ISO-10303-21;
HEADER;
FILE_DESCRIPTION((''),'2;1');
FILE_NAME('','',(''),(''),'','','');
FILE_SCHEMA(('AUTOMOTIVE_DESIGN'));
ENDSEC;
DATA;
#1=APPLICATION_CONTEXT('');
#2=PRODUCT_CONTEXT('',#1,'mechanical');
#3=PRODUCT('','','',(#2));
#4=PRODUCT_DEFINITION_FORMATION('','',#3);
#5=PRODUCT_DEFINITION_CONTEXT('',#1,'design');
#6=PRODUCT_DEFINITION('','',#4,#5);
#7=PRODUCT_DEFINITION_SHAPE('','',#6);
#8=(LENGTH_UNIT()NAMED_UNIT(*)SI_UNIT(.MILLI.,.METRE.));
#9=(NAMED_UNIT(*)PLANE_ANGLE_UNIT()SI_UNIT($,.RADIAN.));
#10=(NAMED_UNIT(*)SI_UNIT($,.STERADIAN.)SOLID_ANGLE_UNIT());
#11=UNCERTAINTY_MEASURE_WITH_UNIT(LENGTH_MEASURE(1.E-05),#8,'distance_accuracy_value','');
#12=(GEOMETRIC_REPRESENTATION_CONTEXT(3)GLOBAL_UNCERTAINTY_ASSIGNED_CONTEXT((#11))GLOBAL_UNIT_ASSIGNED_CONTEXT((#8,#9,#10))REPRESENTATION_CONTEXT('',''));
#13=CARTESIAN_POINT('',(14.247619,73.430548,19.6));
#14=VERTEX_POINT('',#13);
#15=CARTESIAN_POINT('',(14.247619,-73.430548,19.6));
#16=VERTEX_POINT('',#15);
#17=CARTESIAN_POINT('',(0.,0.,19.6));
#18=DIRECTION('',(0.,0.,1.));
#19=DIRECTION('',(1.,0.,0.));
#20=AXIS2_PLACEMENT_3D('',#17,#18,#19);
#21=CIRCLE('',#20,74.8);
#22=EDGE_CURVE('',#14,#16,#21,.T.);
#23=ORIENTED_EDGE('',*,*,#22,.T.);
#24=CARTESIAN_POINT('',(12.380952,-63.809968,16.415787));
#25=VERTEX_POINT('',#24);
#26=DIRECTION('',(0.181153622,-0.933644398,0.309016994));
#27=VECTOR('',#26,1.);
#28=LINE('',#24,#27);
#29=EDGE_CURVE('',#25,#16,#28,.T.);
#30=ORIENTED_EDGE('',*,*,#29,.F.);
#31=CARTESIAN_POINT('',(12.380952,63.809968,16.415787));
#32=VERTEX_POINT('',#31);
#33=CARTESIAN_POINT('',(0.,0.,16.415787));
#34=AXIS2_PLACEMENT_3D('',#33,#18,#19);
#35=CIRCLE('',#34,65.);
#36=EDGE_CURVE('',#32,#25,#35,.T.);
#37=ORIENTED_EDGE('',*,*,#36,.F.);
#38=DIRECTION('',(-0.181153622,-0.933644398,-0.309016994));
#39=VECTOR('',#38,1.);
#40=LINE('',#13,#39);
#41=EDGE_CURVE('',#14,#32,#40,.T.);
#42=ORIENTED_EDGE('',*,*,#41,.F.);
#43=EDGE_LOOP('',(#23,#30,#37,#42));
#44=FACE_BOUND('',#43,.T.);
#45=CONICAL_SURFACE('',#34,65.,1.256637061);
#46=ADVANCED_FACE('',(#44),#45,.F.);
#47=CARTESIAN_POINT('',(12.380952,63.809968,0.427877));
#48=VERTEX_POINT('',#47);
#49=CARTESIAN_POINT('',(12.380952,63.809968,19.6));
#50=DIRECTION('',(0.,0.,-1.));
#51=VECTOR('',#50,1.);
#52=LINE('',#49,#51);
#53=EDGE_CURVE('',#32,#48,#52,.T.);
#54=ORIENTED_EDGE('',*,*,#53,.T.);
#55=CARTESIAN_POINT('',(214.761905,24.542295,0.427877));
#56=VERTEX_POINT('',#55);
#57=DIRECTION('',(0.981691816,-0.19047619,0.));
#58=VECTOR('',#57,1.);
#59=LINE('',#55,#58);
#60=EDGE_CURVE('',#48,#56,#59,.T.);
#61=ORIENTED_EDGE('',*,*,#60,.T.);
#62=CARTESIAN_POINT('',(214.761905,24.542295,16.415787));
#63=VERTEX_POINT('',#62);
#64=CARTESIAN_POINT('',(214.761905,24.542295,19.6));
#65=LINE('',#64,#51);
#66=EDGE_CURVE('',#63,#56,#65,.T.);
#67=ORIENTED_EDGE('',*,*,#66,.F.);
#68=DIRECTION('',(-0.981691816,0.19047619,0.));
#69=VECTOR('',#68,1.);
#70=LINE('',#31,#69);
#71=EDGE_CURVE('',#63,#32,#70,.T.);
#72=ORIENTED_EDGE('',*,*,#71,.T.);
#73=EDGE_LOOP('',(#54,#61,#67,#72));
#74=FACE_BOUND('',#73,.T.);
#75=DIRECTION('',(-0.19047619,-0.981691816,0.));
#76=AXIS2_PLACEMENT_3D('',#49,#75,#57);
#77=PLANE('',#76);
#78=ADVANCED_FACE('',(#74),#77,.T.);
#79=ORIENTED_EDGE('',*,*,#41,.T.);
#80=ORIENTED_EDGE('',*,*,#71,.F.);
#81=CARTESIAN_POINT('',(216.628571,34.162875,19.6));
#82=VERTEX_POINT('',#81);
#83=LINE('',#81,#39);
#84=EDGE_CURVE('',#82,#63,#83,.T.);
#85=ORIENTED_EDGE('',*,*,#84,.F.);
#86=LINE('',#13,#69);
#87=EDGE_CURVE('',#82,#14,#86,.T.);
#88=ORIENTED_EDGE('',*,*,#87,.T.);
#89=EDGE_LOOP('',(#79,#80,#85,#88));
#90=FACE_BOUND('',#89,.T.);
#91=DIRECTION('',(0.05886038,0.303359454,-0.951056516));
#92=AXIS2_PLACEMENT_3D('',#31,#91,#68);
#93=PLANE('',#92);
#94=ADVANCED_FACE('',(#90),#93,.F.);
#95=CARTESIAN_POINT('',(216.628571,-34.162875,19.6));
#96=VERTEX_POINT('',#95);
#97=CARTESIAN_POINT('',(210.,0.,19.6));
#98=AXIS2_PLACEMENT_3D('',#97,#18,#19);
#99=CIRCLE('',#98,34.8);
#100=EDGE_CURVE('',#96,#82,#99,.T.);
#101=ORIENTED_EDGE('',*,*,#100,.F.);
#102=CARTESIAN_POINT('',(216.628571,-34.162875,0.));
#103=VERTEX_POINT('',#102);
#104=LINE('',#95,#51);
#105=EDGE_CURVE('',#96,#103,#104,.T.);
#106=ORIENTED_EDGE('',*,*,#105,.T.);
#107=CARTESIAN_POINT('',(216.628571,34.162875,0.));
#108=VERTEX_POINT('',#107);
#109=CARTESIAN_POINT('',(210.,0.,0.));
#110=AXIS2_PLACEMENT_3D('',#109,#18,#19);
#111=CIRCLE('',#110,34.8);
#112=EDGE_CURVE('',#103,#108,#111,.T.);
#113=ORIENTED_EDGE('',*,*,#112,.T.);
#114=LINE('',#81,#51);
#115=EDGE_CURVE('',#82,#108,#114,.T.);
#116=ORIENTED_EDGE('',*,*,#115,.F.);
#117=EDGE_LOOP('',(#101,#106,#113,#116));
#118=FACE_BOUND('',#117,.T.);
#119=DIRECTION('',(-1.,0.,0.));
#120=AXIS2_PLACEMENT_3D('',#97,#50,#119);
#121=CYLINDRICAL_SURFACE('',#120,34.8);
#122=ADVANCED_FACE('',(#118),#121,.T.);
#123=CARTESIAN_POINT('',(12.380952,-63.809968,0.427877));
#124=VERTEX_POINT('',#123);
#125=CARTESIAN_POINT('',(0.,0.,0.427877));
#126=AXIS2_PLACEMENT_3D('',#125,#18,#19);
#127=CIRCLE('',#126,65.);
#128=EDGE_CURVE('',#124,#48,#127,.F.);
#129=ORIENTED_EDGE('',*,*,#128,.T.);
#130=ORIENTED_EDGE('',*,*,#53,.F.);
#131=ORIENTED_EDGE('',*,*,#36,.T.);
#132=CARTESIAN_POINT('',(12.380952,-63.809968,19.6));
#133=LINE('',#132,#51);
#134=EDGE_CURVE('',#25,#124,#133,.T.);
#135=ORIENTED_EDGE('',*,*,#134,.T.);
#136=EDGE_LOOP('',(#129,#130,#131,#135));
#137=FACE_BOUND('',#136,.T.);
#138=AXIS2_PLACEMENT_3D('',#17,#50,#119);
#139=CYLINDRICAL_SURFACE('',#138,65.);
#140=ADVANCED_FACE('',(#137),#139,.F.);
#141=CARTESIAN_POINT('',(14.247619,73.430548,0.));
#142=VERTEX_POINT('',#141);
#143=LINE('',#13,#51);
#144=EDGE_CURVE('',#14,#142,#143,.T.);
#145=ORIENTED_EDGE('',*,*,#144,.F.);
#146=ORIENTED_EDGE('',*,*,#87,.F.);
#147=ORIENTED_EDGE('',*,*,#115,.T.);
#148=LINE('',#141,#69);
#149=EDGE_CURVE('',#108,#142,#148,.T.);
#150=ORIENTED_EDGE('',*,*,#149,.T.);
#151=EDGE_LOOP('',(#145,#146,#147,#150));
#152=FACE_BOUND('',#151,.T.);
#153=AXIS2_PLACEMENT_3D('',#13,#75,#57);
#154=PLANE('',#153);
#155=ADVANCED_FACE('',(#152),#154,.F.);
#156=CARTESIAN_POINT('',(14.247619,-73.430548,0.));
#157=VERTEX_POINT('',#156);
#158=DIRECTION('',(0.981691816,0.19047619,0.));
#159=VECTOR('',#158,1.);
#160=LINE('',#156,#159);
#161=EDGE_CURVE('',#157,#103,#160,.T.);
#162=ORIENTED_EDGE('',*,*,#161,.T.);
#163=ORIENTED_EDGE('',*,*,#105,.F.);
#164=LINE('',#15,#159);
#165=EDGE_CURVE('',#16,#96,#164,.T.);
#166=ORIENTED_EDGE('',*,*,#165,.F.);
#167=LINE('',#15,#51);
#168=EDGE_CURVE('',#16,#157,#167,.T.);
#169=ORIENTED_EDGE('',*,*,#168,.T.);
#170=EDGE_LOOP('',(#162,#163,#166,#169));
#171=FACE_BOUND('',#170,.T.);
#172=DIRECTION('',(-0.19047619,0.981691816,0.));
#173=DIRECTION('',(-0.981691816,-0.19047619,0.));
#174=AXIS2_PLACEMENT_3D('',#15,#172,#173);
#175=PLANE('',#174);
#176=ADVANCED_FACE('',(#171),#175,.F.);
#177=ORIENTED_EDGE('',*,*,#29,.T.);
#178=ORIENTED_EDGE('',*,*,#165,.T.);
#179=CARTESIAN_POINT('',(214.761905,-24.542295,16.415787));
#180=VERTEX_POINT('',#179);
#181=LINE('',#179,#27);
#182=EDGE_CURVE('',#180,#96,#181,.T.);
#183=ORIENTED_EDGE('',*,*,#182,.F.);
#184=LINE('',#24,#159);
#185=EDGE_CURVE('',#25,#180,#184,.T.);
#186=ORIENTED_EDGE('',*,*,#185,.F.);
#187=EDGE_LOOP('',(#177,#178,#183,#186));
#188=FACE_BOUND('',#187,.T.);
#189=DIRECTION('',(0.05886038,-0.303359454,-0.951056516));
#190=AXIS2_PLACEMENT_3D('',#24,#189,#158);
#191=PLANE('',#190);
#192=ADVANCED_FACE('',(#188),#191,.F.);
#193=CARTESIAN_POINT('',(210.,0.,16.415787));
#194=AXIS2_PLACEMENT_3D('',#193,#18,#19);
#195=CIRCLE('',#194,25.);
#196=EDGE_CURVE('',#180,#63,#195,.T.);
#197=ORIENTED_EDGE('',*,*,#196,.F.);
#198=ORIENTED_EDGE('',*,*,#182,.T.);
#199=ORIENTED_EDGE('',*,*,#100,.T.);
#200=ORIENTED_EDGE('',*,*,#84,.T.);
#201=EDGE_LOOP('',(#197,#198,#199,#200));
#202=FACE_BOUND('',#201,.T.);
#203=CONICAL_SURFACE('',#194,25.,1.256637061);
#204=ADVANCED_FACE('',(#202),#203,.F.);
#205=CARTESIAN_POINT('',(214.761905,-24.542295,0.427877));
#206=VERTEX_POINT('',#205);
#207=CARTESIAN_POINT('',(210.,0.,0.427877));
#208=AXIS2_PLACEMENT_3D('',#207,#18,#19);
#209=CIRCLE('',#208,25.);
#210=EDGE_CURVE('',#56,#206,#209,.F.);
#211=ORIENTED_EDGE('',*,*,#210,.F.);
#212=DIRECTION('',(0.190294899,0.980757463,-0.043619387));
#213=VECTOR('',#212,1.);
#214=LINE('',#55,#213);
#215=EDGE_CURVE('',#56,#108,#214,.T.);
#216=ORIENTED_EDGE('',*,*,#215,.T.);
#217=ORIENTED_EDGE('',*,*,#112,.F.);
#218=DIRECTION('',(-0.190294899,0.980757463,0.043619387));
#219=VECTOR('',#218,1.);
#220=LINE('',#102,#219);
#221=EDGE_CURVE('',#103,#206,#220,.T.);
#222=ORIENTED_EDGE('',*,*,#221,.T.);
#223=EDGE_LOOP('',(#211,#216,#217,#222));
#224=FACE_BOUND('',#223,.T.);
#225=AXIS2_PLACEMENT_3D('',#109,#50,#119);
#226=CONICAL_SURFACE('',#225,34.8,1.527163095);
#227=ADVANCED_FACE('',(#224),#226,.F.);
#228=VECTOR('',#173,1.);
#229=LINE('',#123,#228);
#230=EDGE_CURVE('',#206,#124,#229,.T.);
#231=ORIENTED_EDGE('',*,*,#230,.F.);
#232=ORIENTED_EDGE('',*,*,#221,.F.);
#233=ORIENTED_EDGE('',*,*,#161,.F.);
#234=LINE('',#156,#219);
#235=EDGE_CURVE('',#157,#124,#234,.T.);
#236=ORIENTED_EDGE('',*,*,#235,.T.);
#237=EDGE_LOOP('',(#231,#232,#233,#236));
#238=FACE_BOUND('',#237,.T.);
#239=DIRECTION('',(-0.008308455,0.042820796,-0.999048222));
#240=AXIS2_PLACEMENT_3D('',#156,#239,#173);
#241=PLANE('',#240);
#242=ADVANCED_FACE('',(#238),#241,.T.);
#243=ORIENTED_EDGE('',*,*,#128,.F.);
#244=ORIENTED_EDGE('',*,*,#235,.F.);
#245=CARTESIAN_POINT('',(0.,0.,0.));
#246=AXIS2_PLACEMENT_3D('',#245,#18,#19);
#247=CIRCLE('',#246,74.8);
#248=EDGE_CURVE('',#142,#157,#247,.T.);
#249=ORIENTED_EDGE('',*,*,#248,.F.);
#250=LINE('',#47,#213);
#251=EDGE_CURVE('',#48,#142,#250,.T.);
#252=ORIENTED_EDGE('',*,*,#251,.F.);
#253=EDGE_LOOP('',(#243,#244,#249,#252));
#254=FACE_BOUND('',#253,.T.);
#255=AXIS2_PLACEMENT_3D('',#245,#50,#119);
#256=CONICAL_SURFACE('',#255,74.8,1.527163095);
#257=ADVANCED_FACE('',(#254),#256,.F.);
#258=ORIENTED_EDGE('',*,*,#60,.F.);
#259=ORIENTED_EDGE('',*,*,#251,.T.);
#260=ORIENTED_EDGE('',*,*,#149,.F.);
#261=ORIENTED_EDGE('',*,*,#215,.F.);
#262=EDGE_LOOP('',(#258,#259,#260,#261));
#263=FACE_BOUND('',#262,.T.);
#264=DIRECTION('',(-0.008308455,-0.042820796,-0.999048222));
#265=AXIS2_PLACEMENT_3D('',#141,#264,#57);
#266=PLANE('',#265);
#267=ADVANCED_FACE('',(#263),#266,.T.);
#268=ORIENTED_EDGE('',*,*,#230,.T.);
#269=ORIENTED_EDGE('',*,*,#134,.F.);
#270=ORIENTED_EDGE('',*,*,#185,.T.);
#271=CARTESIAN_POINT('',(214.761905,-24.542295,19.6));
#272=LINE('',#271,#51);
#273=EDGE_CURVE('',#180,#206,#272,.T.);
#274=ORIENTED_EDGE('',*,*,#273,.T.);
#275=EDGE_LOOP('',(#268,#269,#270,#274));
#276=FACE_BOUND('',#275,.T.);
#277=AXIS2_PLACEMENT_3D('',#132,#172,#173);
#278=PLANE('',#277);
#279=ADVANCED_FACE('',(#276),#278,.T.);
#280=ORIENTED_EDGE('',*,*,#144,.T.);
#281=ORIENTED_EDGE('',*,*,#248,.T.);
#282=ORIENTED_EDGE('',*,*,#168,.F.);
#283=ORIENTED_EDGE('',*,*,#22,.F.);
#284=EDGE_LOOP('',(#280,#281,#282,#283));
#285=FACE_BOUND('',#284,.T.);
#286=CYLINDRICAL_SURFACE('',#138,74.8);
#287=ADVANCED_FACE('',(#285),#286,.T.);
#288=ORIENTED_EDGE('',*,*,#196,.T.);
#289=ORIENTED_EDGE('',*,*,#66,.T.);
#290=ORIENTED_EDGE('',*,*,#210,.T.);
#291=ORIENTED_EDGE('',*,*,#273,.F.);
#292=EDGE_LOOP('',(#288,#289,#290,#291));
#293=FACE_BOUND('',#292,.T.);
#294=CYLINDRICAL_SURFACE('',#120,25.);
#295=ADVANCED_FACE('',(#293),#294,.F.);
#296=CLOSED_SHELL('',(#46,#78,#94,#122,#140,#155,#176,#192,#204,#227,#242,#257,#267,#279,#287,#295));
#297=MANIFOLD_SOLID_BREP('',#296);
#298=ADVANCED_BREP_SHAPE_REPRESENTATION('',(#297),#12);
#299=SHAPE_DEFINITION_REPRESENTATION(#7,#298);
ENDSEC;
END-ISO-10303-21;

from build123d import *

# Parameters (mm, degrees)
BOSS_EXTRUDE2_DEPTH = 19.6
CHAMFER1_SIZE       = 3.184213023
CHAMFER1_SIZE_2     = 9.8
CHAMFER2_SIZE       = 9.8
CHAMFER2_SIZE_2     = 0.427877241


with BuildPart() as part:
    # Sketch4 → Boss-Extrude2 (new body)
    with BuildSketch(Plane.XY):
        with BuildLine():
            Line((14.247619048, -73.430547809), (216.628571429, -34.162875184))
            ThreePointArc((216.628571429, -34.162875184), (244.8, 0), (216.628571429, 34.162875184))
            Line((216.628571429, 34.162875184), (14.247619048, 73.430547809))
            ThreePointArc((14.247619048, 73.430547809), (-74.8, 0), (14.247619048, -73.430547809))
        make_face()
        with BuildLine():
            Line((12.380952381, 63.809968016), (214.761904762, 24.542295391))
            ThreePointArc((214.761904762, 24.542295391), (235, 0), (214.761904762, -24.542295391))
            Line((214.761904762, -24.542295391), (12.380952381, -63.809968016))
            ThreePointArc((12.380952381, -63.809968016), (-65, 0), (12.380952381, 63.809968016))
        make_face(mode=Mode.SUBTRACT)
    extrude(amount=BOSS_EXTRUDE2_DEPTH)

    # Chamfer1
    # the kernel refuses this chamfer: 9.8, 3.184213023 mm, written as the material it takes off along each edge
    with BuildSketch(Plane(origin=(0, 0, 19.6), x_dir=(0.19047619047619063, -0.9816918156232525, 0), z_dir=(0.9816918156232525, 0.19047619047619063, 0))) as chamfer1_piece_1:
        Polygon((65, CHAMFER1_SIZE), (65 + CHAMFER1_SIZE_2, 0), (65, 0), align=None)
    revolve(axis=Axis((0, 0, 19.6), (0, 0, -1)), revolution_arc=201.961150855, mode=Mode.SUBTRACT)
    with BuildSketch(Plane(origin=(214.761904762, -24.542295391, 19.6), x_dir=(-0.021348671206160026, 0.1100285329369752, -0.9936991275921844), z_dir=(-0.9816918156232526, -0.1904761904761905, 0)), Plane(origin=(12.380952381, 63.809968016, 19.6), x_dir=(-0.021348671206159867, -0.1100285329369744, -0.9936991275921844), z_dir=(0.9816918156232526, -0.1904761904761905, 0))) as chamfer1_piece_2:
        Polygon((CHAMFER1_SIZE * 0.993699127618, CHAMFER1_SIZE * 0.112080523835), (-CHAMFER1_SIZE_2 * 0.112080523832, CHAMFER1_SIZE_2 * 0.993699127592), (0, 0), align=None)
    extrude(amount=206.155281281, mode=Mode.SUBTRACT)
    with BuildSketch(Plane(origin=(210, 0, 19.6), x_dir=(0.19047619047619035, 0.9816918156232525, 0), z_dir=(-0.9816918156232525, 0.19047619047619035, 0))) as chamfer1_piece_3:
        Polygon((25, CHAMFER1_SIZE), (25 + CHAMFER1_SIZE_2, 0), (25, 0), align=None)
    revolve(axis=Axis((210, 0, 19.6), (0, 0, -1)), revolution_arc=158.038849145, mode=Mode.SUBTRACT)

    # Chamfer2
    # the kernel refuses this chamfer: 9.8, 0.427877241 mm, written as the material it takes off along each edge
    with BuildSketch(Plane(origin=(0, 0, 0), x_dir=(0.19047619047619063, -0.9816918156232525, 0), z_dir=(0.9816918156232525, 0.19047619047619063, 0))) as chamfer2_piece_1:
        Polygon((65 + CHAMFER2_SIZE, 0), (65, -CHAMFER2_SIZE_2 * 0.999999998839), (65, 0), align=None)
    revolve(axis=Axis((0, 0, 0), (0, 0, -1)), revolution_arc=201.961150855, mode=Mode.SUBTRACT)
    with BuildSketch(Plane(origin=(214.761904762, -24.542295391, 0), x_dir=(0.1904759224026141, -0.9816904340036641, -0.0016777278000430975), z_dir=(-0.9816918156232526, -0.1904761904761905, 0)), Plane(origin=(12.380952381, 63.809968016, 0), x_dir=(0.19047592240261413, 0.9816904340036641, -0.0016777278000430988), z_dir=(0.9816918156232526, -0.1904761904761905, 0))) as chamfer2_piece_2:
        Polygon((CHAMFER2_SIZE * 0.999998592614, CHAMFER2_SIZE * 0.00167772780004), (-CHAMFER2_SIZE_2 * 0.0016777277981, CHAMFER2_SIZE_2 * 0.999998591453), (0, 0), align=None)
    extrude(amount=206.155281281, mode=Mode.SUBTRACT)
    with BuildSketch(Plane(origin=(210, 0, 0), x_dir=(0.19047619047619035, 0.9816918156232525, 0), z_dir=(-0.9816918156232525, 0.19047619047619035, 0))) as chamfer2_piece_3:
        Polygon((25 + CHAMFER2_SIZE, 0), (25, -CHAMFER2_SIZE_2 * 0.999999998839), (25, 0), align=None)
    revolve(axis=Axis((210, 0, 0), (0, 0, -1)), revolution_arc=158.038849145, mode=Mode.SUBTRACT)


solid = part.part
